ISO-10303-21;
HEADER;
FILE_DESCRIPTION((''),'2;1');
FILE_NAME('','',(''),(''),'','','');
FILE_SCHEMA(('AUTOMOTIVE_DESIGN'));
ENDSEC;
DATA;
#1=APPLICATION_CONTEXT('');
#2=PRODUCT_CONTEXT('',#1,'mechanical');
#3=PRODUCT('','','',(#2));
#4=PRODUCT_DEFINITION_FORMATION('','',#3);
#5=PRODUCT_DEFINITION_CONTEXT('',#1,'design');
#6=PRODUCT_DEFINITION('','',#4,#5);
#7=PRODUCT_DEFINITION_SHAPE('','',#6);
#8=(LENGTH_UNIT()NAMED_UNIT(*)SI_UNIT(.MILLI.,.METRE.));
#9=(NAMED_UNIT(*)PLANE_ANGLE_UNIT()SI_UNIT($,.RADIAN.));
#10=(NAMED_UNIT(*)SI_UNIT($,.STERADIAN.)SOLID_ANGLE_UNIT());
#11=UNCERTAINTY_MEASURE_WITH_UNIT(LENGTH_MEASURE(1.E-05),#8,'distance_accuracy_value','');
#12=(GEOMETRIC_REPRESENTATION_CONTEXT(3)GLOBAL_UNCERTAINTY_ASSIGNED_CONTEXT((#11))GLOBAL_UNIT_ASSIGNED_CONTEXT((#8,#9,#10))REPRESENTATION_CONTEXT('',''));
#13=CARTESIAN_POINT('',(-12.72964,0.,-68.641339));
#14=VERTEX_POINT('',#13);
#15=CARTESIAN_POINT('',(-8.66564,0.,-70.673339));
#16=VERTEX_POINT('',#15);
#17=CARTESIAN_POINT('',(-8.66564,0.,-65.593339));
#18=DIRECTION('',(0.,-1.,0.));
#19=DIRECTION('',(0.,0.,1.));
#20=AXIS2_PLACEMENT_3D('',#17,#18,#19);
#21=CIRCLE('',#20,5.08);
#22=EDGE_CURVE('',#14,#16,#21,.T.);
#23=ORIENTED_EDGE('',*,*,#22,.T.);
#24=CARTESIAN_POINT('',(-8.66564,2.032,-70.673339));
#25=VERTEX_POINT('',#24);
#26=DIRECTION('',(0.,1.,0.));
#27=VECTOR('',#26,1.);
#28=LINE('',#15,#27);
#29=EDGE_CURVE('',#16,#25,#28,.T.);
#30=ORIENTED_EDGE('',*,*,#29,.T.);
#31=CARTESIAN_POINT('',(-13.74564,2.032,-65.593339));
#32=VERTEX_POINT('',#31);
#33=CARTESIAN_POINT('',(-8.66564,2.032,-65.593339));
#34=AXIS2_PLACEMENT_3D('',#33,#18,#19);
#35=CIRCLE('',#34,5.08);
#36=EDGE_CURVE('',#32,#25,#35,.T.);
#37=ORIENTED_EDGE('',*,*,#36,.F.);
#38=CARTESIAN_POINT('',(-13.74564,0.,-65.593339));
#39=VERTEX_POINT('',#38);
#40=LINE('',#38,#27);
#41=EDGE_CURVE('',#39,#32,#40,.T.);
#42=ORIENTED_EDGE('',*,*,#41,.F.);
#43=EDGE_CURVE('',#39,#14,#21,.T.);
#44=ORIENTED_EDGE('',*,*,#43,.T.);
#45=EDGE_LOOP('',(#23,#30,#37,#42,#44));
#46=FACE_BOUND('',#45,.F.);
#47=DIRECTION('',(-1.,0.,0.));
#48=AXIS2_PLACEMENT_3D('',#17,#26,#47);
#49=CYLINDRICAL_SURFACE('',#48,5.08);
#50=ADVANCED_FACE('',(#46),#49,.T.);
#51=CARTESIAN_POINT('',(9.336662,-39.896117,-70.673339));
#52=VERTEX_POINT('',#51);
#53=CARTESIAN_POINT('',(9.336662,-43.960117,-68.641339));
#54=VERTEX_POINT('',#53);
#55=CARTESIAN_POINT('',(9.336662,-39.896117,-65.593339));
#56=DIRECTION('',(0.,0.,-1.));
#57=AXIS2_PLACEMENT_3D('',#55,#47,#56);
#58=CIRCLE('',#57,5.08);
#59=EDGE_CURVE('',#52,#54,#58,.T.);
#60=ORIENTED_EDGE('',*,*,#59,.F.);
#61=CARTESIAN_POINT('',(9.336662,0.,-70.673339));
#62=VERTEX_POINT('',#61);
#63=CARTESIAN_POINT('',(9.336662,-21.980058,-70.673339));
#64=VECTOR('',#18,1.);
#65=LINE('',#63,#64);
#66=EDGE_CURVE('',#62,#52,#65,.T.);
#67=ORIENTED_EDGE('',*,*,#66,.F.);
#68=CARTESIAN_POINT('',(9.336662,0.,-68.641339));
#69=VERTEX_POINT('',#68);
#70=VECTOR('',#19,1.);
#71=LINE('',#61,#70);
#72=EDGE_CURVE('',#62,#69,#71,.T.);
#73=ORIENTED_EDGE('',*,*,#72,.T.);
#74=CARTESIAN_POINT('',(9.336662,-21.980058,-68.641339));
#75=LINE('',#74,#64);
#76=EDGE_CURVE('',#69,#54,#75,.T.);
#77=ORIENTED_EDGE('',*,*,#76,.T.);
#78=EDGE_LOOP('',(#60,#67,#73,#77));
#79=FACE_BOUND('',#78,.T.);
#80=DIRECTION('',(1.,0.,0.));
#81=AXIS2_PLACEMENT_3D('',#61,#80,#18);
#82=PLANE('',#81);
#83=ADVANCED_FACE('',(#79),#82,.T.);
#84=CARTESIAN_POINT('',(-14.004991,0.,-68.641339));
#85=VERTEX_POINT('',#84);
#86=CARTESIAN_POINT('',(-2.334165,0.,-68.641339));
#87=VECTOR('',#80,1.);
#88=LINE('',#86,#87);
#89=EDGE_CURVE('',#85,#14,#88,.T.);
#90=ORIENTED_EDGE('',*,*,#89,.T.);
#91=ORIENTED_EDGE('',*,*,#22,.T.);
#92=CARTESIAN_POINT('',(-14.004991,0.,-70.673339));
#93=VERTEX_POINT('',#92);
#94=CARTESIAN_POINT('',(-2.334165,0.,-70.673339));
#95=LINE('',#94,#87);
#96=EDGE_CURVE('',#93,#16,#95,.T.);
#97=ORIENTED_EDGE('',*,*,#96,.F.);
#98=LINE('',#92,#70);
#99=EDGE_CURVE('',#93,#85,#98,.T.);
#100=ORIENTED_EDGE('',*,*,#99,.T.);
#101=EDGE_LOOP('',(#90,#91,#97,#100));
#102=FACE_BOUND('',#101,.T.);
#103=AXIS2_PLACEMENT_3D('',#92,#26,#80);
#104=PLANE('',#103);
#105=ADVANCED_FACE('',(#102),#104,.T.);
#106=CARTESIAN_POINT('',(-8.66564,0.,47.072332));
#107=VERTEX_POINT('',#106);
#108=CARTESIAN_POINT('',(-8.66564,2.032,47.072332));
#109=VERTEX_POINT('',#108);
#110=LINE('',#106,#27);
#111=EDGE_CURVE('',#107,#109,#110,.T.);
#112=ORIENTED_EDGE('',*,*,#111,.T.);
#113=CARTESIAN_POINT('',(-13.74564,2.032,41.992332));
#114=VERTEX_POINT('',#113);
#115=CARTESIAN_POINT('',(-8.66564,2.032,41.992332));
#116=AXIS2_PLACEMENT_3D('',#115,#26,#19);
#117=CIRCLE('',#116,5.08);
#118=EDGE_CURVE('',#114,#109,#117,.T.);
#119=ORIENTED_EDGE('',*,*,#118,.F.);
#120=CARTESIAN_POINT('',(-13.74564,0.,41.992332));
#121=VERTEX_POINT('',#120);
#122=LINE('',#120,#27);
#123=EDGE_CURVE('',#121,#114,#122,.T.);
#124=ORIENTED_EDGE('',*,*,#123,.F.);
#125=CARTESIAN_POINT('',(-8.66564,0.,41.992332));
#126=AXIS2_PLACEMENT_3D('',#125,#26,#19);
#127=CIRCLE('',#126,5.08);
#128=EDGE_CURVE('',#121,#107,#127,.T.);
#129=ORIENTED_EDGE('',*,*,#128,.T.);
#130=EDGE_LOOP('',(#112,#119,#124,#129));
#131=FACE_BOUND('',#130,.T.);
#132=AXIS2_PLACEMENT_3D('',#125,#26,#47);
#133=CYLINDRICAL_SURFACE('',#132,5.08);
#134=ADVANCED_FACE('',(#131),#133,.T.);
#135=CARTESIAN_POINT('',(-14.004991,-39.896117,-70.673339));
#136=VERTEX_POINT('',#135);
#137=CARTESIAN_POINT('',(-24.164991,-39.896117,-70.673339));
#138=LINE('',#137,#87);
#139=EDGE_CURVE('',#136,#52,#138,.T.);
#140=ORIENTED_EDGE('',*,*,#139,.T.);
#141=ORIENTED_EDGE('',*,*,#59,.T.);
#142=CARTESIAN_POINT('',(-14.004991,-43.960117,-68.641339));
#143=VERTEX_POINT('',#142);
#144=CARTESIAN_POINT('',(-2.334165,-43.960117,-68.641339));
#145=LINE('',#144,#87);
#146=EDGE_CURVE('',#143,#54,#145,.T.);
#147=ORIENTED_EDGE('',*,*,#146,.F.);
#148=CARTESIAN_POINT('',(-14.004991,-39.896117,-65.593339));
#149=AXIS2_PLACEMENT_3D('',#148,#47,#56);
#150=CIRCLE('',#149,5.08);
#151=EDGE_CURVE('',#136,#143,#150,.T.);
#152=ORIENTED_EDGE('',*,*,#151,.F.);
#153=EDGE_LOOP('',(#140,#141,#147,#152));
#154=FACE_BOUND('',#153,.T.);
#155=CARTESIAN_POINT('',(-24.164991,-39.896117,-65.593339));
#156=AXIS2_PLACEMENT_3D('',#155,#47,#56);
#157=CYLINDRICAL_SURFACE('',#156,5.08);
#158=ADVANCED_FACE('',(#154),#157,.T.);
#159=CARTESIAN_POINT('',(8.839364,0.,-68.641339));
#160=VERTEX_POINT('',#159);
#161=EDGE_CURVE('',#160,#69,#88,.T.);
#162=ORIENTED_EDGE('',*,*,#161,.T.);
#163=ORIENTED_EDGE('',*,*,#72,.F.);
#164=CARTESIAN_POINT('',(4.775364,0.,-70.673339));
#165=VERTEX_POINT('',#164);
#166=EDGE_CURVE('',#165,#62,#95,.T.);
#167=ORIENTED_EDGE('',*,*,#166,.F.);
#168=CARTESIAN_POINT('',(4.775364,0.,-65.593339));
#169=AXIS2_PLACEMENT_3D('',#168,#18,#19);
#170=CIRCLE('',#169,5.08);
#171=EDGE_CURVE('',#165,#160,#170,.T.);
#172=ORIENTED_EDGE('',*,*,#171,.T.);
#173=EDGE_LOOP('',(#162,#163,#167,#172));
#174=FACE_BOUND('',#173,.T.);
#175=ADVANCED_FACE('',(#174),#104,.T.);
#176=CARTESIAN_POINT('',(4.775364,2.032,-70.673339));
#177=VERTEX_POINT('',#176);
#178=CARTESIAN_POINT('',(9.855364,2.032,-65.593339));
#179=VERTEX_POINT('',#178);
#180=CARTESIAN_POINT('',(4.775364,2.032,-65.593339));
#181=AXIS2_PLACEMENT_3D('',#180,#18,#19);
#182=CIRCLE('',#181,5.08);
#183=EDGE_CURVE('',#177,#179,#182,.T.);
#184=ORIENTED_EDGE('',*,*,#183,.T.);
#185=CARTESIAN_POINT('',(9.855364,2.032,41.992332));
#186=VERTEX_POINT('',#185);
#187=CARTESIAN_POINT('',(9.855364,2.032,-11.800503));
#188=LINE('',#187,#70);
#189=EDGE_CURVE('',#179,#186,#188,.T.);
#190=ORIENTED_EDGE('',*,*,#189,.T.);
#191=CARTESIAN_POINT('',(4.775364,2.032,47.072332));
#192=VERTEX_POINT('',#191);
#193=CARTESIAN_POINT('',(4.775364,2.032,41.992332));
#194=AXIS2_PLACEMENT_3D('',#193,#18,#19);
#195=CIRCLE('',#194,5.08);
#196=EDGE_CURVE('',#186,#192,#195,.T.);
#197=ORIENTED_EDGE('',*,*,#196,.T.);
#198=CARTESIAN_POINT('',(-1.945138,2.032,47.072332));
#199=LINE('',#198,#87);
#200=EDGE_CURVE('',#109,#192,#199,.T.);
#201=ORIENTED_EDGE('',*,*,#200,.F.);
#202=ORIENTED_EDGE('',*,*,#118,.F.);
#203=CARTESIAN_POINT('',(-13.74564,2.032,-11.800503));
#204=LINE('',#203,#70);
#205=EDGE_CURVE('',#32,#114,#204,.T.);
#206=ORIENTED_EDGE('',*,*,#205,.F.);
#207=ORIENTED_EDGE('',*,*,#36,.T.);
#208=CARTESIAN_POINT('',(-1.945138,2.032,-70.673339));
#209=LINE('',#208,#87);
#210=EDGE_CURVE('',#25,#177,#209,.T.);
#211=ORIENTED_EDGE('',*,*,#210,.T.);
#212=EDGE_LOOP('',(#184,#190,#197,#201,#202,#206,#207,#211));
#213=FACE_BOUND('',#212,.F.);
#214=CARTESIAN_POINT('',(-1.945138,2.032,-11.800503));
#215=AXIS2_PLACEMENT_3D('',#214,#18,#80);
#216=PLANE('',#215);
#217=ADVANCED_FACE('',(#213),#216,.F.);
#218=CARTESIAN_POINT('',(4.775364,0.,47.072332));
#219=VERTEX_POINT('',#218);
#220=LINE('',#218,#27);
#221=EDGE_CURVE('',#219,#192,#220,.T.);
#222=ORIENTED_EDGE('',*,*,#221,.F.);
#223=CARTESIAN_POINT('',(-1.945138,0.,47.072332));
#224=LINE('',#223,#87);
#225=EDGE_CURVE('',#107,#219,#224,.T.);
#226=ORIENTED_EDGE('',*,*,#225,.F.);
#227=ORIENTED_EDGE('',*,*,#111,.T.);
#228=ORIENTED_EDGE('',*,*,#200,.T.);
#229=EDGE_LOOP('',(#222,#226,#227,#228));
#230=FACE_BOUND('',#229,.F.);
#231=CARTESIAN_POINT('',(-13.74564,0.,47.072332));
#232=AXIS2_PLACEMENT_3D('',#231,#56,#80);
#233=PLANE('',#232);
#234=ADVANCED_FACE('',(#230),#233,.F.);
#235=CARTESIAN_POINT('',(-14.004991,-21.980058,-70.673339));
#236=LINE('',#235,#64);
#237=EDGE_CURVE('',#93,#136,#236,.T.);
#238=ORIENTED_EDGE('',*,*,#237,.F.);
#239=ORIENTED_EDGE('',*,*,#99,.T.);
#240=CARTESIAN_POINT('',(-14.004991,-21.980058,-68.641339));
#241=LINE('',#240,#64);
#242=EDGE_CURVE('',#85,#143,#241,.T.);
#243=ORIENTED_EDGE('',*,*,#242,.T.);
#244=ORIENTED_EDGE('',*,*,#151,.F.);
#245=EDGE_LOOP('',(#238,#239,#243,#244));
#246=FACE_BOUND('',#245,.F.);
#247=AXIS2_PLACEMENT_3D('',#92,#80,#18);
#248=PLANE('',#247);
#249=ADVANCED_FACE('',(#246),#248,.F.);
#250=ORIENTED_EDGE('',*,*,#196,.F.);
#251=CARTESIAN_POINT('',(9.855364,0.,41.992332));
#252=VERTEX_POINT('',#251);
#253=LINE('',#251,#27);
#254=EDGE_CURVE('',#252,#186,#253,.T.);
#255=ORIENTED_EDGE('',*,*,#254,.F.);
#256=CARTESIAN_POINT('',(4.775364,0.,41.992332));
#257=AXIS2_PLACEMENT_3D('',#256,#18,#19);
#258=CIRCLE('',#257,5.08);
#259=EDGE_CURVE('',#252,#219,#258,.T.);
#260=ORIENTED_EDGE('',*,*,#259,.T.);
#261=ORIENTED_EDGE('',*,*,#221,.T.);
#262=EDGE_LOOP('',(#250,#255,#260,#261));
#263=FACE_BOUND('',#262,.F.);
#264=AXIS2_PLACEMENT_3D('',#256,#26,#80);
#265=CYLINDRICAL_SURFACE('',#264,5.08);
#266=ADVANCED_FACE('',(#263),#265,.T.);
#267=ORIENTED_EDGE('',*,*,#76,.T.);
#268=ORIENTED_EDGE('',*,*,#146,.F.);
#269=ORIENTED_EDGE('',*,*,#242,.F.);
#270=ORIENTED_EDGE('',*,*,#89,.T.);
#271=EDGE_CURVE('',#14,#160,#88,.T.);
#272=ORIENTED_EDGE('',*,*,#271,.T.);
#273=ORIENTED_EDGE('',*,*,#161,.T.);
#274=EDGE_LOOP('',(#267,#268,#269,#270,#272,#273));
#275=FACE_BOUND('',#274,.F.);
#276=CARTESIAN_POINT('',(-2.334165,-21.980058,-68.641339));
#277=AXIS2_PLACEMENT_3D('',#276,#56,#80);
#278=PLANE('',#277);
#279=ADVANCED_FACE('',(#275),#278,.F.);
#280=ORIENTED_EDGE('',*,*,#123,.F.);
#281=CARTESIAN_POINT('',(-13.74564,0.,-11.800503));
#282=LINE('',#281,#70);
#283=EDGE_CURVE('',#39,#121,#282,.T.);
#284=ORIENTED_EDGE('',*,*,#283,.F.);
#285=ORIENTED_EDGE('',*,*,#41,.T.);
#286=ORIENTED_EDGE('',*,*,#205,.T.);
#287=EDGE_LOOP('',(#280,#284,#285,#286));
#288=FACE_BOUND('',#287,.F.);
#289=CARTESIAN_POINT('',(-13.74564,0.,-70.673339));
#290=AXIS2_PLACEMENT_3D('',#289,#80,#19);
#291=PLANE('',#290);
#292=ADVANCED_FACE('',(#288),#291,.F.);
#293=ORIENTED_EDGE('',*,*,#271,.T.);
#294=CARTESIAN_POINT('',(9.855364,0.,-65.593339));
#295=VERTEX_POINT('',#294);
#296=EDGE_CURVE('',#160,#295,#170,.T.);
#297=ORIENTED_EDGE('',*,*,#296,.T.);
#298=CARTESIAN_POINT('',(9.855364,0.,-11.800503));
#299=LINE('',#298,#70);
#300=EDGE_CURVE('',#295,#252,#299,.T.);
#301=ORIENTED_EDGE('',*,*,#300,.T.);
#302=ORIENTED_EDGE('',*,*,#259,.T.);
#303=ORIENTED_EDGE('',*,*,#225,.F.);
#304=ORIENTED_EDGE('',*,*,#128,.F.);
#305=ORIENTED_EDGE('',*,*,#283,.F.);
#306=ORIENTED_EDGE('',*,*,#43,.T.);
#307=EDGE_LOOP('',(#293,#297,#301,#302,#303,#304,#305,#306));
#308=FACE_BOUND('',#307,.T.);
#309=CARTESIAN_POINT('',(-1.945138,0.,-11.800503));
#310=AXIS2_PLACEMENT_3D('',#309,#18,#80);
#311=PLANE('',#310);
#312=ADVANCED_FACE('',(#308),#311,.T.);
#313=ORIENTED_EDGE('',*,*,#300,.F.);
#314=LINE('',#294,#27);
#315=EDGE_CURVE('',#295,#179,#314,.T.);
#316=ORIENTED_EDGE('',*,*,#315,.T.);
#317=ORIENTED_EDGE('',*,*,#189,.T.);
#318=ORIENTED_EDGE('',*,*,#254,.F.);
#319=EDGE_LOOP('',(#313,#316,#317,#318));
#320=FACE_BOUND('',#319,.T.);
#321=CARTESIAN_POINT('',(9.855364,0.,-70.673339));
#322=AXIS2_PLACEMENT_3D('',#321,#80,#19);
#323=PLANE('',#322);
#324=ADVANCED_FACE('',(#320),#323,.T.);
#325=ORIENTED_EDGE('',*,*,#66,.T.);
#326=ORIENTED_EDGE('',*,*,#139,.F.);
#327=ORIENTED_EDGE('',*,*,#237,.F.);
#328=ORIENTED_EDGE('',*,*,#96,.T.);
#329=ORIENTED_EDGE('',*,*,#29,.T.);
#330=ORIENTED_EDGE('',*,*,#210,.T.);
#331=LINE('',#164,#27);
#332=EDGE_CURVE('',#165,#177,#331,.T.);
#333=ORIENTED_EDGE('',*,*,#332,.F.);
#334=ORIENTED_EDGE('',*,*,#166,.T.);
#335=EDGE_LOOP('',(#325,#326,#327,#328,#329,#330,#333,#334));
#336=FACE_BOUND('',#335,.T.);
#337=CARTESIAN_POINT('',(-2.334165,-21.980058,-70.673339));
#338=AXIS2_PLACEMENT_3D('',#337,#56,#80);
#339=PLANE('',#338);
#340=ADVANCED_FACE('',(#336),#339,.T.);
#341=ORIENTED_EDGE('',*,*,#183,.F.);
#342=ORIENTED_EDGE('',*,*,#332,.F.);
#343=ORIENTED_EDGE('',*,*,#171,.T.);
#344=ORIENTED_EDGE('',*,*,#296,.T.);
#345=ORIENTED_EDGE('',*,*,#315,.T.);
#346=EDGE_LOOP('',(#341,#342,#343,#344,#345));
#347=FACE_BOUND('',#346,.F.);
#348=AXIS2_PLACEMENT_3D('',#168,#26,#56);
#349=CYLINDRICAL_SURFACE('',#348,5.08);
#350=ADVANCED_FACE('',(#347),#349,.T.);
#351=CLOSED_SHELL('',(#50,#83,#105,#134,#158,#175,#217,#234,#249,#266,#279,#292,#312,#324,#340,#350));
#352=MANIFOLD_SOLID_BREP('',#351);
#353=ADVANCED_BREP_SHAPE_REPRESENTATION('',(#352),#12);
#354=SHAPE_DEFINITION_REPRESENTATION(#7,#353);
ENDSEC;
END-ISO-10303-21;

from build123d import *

# Parameters (mm, degrees)
F0_W        = 23.6010048538
F0_H        = 117.7456714213
F1_DEPTH    = 2.032
F2_R        = 5.08
F3_W        = 23.3416529372
F3_H        = 43.9601168036
F4_DEPTH    = 2.032
F5_T1_DEPTH = 43.6616529372


# Not quite as in the source:
# - a fillet or chamfer that OpenCascade refuses, or shapes differently, is made with other operations: its cross-section is extruded or revolved along the edge and cut away or added


with BuildPart() as f1:
    # F0 (on Front) → F1 (new body)
    with BuildSketch(Plane.XZ):
        with Locations((-1.9451379776, -11.8005033582)):
            Rectangle(F0_W, F0_H)
    extrude(amount=-F1_DEPTH)

    # F2
    f2_edges = [f1.edges().sort_by_distance(p)[0] for p in [
        (-13.74564, 1.016, 47.072332),
        (9.855364, 1.016, 47.072332),
        (9.855364, 1.016, -70.673339),
        (-13.74564, 1.016, -70.673339),
    ]]
    fillet(f2_edges, radius=F2_R)

    # F3 (on face) → F4 (join)
    with BuildSketch(Plane(origin=(0, 0, -70.6733390689), x_dir=(1, 0, 0), z_dir=(0, 0, -1))):
        with Locations((-2.3341649212, 21.9800584018)):
            Rectangle(F3_W, F3_H)
    extrude(amount=-F4_DEPTH)

    # F5: fillet of radius 5.08 on 1 edges, made by hand

    # F5_s2 → F5_t1 (cut)
    with BuildSketch(Plane.YZ.offset(-24.1649913898)):
        with BuildLine():
            ThreePointArc((-39.8961168036, -70.6733390689), (-42.1679618688, -70.1370291992), (-43.9601168036, -68.6413390689))
            Line((-43.9601168036, -68.6413390689), (-43.9601168036, -70.6733390689))
            Line((-43.9601168036, -70.6733390689), (-39.8961168036, -70.6733390689))
        make_face()
    extrude(amount=F5_T1_DEPTH, mode=Mode.SUBTRACT)


solid = f1.part
